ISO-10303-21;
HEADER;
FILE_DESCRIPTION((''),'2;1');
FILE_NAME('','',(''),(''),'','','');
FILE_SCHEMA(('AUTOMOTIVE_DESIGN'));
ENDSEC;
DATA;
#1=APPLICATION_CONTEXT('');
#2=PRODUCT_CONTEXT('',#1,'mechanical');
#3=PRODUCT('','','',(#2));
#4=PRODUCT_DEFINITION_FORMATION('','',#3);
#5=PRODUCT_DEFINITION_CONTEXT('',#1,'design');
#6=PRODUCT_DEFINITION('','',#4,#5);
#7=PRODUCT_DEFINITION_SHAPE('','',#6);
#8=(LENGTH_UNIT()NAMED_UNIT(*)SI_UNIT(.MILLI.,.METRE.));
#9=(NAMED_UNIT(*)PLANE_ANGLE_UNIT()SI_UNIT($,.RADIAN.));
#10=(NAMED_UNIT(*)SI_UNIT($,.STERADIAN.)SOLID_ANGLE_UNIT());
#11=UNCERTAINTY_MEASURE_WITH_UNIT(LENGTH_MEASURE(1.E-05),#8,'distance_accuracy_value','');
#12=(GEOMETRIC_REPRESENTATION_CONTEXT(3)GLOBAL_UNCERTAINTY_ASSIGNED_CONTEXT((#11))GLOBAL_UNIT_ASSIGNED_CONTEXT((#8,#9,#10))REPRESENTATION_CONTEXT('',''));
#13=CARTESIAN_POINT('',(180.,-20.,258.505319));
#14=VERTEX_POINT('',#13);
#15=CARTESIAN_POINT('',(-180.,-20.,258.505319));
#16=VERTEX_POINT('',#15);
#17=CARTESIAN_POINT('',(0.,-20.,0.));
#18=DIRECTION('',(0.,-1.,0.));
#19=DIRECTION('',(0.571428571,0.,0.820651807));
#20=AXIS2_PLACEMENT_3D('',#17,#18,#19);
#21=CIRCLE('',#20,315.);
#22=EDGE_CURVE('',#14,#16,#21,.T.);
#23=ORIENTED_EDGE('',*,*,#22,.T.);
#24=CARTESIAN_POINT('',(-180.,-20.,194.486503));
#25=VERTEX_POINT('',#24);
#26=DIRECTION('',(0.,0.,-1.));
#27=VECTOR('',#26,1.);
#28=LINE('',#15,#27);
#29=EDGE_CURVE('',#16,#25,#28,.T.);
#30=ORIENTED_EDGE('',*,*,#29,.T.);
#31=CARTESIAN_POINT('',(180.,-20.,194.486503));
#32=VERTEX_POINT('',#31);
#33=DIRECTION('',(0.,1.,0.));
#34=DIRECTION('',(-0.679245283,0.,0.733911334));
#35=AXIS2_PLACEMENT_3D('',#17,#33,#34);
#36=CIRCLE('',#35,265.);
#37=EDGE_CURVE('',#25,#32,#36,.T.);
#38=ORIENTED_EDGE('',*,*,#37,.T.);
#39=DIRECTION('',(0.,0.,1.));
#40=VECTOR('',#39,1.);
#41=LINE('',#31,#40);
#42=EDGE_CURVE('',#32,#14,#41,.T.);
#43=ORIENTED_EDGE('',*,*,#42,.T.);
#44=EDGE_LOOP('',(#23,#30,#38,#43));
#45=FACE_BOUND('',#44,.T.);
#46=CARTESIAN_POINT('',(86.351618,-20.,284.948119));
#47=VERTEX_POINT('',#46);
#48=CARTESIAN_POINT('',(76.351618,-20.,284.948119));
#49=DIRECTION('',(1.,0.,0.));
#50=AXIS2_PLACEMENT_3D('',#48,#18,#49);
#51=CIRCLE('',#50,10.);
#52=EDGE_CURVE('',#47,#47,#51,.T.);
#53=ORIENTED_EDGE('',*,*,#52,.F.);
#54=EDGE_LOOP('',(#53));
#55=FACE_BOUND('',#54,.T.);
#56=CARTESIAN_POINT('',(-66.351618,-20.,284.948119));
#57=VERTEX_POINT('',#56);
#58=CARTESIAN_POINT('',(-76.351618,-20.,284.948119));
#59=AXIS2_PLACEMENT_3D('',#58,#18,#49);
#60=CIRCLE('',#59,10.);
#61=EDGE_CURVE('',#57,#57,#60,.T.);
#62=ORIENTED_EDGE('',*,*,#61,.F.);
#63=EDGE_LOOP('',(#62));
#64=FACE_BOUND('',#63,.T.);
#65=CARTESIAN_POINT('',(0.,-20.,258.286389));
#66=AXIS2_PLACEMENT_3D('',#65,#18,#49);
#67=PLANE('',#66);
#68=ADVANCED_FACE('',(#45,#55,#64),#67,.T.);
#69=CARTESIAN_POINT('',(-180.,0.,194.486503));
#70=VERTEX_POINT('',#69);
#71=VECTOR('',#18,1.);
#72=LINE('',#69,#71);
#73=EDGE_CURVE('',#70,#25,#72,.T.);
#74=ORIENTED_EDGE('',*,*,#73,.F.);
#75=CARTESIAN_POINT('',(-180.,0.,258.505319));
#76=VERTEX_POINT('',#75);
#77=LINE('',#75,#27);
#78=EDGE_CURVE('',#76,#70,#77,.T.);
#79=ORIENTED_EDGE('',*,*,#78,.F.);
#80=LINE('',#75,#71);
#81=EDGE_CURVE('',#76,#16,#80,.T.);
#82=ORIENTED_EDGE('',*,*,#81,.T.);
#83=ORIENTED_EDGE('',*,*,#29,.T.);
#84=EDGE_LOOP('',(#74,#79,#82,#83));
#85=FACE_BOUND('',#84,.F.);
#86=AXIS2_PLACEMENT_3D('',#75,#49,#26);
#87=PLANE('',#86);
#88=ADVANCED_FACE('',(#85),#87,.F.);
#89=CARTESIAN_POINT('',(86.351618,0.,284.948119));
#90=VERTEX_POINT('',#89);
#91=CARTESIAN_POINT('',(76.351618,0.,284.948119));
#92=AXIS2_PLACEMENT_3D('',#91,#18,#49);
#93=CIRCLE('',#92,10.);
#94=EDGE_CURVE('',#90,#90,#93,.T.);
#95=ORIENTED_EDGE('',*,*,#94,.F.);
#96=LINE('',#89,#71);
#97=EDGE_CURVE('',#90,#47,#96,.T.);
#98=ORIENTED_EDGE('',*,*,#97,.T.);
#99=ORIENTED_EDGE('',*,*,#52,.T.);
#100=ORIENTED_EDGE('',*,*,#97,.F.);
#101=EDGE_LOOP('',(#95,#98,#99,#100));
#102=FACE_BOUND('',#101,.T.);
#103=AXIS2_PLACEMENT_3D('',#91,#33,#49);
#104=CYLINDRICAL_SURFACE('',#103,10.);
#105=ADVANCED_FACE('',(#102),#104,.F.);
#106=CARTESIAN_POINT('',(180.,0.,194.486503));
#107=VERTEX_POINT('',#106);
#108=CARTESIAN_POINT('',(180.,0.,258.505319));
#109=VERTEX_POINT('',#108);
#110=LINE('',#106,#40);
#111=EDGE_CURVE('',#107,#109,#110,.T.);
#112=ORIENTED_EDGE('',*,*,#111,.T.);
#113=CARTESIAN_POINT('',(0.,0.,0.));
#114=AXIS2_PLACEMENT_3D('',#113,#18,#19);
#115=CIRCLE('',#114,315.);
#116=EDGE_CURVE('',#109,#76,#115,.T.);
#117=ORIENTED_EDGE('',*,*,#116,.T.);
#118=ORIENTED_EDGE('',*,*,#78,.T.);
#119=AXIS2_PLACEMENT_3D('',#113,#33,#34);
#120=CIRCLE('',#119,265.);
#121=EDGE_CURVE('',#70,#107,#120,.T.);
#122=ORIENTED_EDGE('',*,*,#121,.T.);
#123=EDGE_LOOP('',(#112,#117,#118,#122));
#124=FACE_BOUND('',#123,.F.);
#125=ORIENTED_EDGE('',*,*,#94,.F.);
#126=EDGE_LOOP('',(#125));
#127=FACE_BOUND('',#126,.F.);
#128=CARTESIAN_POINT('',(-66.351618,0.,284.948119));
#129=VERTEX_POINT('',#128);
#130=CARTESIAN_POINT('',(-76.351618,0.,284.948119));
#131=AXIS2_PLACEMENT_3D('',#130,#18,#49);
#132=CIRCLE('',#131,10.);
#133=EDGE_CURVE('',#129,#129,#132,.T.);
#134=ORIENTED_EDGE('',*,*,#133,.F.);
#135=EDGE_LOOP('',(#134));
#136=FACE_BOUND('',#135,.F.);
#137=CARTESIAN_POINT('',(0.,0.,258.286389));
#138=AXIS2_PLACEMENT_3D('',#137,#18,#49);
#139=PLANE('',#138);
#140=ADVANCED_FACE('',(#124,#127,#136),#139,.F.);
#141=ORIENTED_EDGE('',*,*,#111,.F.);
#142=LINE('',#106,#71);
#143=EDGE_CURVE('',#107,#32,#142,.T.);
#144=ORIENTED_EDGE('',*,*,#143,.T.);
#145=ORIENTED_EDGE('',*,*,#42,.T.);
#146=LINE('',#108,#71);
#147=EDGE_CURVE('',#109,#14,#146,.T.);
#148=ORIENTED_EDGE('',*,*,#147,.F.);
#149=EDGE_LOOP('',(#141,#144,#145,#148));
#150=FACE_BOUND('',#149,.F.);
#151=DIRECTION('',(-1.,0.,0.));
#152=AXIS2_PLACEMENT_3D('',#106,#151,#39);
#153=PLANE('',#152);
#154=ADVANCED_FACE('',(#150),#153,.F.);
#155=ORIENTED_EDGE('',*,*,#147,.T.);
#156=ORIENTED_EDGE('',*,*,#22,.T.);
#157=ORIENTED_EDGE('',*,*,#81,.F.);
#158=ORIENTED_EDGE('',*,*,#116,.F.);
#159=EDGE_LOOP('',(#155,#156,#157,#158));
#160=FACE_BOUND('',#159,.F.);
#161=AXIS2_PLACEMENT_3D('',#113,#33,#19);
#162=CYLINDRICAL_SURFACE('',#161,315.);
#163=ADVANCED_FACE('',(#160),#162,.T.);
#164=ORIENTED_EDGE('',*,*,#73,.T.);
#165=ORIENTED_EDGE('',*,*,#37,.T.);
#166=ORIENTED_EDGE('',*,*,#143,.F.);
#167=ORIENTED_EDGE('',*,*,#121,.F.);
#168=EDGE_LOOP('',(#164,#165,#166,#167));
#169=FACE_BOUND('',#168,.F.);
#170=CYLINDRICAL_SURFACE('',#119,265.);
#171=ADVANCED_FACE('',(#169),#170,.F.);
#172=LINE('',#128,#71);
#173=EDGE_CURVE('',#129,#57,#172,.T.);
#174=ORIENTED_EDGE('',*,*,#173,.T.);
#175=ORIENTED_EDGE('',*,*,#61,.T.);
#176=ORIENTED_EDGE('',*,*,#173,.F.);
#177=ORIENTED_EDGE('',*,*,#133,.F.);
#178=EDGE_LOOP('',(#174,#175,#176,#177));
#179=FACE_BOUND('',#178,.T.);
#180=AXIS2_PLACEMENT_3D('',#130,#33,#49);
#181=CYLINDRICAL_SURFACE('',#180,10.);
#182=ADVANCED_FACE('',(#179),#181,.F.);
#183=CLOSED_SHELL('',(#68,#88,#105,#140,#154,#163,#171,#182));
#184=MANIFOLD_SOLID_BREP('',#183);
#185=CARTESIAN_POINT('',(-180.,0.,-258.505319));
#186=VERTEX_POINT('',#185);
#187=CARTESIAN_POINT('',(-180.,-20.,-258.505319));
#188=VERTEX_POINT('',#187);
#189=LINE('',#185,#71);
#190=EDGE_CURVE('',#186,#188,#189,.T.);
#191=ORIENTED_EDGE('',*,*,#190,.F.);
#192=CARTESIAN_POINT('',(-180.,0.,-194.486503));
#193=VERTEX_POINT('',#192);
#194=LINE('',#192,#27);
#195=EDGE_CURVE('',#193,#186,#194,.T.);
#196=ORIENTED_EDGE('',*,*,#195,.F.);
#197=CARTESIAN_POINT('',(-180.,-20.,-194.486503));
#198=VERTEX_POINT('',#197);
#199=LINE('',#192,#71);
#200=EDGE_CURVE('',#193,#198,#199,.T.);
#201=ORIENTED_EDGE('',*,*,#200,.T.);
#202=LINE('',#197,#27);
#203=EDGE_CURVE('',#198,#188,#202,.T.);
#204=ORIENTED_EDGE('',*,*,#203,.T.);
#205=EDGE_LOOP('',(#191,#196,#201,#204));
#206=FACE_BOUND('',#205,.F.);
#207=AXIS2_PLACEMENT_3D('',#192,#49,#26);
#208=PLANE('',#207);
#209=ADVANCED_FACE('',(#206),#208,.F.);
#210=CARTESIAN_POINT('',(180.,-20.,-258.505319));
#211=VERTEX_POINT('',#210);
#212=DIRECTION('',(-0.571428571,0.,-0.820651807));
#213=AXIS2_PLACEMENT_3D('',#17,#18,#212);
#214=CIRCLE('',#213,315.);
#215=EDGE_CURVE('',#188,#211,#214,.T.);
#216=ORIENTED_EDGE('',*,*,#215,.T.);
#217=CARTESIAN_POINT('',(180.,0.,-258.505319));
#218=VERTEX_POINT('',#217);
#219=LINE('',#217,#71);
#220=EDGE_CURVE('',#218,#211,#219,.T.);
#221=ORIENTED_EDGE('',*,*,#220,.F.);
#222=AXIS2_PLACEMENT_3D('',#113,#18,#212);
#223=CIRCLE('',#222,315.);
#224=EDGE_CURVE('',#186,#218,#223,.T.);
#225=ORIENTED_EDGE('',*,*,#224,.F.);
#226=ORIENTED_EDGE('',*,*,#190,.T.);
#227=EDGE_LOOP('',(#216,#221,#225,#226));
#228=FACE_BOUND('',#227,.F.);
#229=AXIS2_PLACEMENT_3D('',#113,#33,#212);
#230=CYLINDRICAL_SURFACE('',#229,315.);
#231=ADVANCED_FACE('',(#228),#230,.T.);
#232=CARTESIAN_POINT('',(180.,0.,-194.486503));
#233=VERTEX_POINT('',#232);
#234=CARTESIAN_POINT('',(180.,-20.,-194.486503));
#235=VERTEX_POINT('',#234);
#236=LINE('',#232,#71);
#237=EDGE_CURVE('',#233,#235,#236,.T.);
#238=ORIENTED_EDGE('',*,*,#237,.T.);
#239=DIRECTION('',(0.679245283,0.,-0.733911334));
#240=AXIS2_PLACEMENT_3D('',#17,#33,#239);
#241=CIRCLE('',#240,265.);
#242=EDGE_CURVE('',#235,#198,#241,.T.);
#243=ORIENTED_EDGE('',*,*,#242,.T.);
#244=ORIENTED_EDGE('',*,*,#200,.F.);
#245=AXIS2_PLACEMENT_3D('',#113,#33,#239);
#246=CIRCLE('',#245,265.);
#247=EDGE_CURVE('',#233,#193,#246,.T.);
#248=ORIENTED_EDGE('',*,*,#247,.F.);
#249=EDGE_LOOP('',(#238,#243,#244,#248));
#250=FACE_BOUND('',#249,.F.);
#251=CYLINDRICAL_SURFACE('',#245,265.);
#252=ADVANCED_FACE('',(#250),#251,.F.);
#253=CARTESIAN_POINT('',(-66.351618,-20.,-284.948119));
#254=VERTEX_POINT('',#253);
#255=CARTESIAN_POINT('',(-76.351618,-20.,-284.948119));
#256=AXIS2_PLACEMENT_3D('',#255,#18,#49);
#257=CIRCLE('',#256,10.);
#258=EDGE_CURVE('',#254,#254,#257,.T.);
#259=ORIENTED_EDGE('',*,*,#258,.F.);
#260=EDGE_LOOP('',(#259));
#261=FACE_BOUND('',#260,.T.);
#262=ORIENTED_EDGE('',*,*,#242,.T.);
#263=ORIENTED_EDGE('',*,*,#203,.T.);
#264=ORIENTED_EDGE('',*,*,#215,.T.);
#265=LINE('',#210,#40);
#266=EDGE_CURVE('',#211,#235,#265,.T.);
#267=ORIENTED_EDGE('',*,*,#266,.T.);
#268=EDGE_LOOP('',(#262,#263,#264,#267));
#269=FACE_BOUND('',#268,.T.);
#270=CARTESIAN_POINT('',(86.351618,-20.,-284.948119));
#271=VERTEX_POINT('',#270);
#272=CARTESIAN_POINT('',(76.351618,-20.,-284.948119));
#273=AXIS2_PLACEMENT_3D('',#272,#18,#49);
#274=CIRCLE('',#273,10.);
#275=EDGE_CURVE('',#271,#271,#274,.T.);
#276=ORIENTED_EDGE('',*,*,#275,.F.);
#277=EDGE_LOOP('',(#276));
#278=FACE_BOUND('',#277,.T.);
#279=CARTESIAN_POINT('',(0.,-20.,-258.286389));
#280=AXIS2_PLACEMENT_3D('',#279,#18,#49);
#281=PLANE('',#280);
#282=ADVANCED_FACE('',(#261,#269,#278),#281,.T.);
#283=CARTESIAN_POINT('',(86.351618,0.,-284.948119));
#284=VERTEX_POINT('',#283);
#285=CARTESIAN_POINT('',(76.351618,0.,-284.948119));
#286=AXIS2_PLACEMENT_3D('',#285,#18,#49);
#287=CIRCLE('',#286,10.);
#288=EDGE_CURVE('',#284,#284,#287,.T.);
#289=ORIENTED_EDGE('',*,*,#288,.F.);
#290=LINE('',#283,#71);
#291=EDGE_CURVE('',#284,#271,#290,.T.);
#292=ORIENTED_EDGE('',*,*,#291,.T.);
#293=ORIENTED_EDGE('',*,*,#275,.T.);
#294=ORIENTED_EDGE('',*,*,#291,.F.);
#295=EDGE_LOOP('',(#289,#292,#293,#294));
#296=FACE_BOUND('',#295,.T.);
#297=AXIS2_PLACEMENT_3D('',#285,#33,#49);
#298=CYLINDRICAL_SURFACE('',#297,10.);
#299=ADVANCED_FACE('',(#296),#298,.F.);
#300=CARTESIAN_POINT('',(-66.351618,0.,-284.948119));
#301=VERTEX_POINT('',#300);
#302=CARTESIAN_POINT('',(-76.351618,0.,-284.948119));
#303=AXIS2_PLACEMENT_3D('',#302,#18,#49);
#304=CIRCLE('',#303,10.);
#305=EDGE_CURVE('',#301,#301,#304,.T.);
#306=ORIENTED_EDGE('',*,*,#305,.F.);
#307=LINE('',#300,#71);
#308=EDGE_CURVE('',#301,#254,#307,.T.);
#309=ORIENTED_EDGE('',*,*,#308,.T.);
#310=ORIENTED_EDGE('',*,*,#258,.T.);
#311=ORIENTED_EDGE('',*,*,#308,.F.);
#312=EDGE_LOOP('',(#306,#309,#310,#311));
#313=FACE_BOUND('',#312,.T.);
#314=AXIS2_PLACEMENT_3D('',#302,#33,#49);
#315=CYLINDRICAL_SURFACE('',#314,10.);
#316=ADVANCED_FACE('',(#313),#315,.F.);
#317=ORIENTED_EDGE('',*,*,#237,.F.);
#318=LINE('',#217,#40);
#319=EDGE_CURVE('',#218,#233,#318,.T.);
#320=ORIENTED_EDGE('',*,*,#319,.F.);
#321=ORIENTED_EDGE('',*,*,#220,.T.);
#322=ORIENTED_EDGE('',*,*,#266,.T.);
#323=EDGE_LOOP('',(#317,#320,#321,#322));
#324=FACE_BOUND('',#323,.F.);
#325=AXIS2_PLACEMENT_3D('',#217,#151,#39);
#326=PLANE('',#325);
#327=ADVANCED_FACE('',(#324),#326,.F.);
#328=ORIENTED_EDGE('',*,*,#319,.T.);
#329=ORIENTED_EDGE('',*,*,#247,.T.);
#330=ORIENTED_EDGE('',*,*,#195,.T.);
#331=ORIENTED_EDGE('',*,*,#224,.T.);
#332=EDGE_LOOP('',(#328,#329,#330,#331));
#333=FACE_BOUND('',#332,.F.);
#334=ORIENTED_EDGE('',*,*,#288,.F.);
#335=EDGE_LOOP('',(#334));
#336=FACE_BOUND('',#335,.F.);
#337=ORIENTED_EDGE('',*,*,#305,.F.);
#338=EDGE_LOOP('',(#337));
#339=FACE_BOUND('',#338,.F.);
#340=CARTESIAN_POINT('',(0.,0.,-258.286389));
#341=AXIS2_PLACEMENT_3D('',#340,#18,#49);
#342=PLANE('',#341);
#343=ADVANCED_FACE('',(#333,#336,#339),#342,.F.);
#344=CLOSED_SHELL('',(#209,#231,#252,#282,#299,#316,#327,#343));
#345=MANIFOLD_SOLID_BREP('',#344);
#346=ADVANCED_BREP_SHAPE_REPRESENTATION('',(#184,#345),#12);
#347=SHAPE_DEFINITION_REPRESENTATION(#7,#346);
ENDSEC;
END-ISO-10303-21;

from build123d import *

# Parameters (mm, degrees)
F0_R     = 10
F1_DEPTH = 20


with BuildPart() as f1:
    # F0 (on Front) → F1 (new body)
    with BuildSketch(Plane.XZ):
        with BuildLine():
            ThreePointArc((-180, 194.4865033878), (0, 265), (180, 194.4865033878))
            Line((180, 194.4865033878), (180, 258.5053190942))
            ThreePointArc((180, 258.5053190942), (0, 315), (-180, 258.5053190942))
            Line((-180, 258.5053190942), (-180, 194.4865033878))
        make_face()
        with Locations((-76.3516183052, 284.9481187553)):
            Circle(F0_R, mode=Mode.SUBTRACT)
        with Locations((76.3516183052, 284.9481187553)):
            Circle(F0_R, mode=Mode.SUBTRACT)
    extrude(amount=F1_DEPTH)


with BuildPart() as f1b:
    # F0 (on Front) → F1, piece 2 (new body)
    with BuildSketch(Plane.XZ):
        with BuildLine():
            Line((180, -258.5053190942), (180, -194.4865033878))
            ThreePointArc((180, -194.4865033878), (0, -265), (-180, -194.4865033878))
            Line((-180, -194.4865033878), (-180, -258.5053190942))
            ThreePointArc((-180, -258.5053190942), (0, -315), (180, -258.5053190942))
        make_face()
        with Locations((-76.3516183052, -284.9481187553)):
            Circle(F0_R, mode=Mode.SUBTRACT)
        with Locations((76.3516183052, -284.9481187553)):
            Circle(F0_R, mode=Mode.SUBTRACT)
    extrude(amount=F1_DEPTH)


solid = Compound([f1.part, f1b.part])
